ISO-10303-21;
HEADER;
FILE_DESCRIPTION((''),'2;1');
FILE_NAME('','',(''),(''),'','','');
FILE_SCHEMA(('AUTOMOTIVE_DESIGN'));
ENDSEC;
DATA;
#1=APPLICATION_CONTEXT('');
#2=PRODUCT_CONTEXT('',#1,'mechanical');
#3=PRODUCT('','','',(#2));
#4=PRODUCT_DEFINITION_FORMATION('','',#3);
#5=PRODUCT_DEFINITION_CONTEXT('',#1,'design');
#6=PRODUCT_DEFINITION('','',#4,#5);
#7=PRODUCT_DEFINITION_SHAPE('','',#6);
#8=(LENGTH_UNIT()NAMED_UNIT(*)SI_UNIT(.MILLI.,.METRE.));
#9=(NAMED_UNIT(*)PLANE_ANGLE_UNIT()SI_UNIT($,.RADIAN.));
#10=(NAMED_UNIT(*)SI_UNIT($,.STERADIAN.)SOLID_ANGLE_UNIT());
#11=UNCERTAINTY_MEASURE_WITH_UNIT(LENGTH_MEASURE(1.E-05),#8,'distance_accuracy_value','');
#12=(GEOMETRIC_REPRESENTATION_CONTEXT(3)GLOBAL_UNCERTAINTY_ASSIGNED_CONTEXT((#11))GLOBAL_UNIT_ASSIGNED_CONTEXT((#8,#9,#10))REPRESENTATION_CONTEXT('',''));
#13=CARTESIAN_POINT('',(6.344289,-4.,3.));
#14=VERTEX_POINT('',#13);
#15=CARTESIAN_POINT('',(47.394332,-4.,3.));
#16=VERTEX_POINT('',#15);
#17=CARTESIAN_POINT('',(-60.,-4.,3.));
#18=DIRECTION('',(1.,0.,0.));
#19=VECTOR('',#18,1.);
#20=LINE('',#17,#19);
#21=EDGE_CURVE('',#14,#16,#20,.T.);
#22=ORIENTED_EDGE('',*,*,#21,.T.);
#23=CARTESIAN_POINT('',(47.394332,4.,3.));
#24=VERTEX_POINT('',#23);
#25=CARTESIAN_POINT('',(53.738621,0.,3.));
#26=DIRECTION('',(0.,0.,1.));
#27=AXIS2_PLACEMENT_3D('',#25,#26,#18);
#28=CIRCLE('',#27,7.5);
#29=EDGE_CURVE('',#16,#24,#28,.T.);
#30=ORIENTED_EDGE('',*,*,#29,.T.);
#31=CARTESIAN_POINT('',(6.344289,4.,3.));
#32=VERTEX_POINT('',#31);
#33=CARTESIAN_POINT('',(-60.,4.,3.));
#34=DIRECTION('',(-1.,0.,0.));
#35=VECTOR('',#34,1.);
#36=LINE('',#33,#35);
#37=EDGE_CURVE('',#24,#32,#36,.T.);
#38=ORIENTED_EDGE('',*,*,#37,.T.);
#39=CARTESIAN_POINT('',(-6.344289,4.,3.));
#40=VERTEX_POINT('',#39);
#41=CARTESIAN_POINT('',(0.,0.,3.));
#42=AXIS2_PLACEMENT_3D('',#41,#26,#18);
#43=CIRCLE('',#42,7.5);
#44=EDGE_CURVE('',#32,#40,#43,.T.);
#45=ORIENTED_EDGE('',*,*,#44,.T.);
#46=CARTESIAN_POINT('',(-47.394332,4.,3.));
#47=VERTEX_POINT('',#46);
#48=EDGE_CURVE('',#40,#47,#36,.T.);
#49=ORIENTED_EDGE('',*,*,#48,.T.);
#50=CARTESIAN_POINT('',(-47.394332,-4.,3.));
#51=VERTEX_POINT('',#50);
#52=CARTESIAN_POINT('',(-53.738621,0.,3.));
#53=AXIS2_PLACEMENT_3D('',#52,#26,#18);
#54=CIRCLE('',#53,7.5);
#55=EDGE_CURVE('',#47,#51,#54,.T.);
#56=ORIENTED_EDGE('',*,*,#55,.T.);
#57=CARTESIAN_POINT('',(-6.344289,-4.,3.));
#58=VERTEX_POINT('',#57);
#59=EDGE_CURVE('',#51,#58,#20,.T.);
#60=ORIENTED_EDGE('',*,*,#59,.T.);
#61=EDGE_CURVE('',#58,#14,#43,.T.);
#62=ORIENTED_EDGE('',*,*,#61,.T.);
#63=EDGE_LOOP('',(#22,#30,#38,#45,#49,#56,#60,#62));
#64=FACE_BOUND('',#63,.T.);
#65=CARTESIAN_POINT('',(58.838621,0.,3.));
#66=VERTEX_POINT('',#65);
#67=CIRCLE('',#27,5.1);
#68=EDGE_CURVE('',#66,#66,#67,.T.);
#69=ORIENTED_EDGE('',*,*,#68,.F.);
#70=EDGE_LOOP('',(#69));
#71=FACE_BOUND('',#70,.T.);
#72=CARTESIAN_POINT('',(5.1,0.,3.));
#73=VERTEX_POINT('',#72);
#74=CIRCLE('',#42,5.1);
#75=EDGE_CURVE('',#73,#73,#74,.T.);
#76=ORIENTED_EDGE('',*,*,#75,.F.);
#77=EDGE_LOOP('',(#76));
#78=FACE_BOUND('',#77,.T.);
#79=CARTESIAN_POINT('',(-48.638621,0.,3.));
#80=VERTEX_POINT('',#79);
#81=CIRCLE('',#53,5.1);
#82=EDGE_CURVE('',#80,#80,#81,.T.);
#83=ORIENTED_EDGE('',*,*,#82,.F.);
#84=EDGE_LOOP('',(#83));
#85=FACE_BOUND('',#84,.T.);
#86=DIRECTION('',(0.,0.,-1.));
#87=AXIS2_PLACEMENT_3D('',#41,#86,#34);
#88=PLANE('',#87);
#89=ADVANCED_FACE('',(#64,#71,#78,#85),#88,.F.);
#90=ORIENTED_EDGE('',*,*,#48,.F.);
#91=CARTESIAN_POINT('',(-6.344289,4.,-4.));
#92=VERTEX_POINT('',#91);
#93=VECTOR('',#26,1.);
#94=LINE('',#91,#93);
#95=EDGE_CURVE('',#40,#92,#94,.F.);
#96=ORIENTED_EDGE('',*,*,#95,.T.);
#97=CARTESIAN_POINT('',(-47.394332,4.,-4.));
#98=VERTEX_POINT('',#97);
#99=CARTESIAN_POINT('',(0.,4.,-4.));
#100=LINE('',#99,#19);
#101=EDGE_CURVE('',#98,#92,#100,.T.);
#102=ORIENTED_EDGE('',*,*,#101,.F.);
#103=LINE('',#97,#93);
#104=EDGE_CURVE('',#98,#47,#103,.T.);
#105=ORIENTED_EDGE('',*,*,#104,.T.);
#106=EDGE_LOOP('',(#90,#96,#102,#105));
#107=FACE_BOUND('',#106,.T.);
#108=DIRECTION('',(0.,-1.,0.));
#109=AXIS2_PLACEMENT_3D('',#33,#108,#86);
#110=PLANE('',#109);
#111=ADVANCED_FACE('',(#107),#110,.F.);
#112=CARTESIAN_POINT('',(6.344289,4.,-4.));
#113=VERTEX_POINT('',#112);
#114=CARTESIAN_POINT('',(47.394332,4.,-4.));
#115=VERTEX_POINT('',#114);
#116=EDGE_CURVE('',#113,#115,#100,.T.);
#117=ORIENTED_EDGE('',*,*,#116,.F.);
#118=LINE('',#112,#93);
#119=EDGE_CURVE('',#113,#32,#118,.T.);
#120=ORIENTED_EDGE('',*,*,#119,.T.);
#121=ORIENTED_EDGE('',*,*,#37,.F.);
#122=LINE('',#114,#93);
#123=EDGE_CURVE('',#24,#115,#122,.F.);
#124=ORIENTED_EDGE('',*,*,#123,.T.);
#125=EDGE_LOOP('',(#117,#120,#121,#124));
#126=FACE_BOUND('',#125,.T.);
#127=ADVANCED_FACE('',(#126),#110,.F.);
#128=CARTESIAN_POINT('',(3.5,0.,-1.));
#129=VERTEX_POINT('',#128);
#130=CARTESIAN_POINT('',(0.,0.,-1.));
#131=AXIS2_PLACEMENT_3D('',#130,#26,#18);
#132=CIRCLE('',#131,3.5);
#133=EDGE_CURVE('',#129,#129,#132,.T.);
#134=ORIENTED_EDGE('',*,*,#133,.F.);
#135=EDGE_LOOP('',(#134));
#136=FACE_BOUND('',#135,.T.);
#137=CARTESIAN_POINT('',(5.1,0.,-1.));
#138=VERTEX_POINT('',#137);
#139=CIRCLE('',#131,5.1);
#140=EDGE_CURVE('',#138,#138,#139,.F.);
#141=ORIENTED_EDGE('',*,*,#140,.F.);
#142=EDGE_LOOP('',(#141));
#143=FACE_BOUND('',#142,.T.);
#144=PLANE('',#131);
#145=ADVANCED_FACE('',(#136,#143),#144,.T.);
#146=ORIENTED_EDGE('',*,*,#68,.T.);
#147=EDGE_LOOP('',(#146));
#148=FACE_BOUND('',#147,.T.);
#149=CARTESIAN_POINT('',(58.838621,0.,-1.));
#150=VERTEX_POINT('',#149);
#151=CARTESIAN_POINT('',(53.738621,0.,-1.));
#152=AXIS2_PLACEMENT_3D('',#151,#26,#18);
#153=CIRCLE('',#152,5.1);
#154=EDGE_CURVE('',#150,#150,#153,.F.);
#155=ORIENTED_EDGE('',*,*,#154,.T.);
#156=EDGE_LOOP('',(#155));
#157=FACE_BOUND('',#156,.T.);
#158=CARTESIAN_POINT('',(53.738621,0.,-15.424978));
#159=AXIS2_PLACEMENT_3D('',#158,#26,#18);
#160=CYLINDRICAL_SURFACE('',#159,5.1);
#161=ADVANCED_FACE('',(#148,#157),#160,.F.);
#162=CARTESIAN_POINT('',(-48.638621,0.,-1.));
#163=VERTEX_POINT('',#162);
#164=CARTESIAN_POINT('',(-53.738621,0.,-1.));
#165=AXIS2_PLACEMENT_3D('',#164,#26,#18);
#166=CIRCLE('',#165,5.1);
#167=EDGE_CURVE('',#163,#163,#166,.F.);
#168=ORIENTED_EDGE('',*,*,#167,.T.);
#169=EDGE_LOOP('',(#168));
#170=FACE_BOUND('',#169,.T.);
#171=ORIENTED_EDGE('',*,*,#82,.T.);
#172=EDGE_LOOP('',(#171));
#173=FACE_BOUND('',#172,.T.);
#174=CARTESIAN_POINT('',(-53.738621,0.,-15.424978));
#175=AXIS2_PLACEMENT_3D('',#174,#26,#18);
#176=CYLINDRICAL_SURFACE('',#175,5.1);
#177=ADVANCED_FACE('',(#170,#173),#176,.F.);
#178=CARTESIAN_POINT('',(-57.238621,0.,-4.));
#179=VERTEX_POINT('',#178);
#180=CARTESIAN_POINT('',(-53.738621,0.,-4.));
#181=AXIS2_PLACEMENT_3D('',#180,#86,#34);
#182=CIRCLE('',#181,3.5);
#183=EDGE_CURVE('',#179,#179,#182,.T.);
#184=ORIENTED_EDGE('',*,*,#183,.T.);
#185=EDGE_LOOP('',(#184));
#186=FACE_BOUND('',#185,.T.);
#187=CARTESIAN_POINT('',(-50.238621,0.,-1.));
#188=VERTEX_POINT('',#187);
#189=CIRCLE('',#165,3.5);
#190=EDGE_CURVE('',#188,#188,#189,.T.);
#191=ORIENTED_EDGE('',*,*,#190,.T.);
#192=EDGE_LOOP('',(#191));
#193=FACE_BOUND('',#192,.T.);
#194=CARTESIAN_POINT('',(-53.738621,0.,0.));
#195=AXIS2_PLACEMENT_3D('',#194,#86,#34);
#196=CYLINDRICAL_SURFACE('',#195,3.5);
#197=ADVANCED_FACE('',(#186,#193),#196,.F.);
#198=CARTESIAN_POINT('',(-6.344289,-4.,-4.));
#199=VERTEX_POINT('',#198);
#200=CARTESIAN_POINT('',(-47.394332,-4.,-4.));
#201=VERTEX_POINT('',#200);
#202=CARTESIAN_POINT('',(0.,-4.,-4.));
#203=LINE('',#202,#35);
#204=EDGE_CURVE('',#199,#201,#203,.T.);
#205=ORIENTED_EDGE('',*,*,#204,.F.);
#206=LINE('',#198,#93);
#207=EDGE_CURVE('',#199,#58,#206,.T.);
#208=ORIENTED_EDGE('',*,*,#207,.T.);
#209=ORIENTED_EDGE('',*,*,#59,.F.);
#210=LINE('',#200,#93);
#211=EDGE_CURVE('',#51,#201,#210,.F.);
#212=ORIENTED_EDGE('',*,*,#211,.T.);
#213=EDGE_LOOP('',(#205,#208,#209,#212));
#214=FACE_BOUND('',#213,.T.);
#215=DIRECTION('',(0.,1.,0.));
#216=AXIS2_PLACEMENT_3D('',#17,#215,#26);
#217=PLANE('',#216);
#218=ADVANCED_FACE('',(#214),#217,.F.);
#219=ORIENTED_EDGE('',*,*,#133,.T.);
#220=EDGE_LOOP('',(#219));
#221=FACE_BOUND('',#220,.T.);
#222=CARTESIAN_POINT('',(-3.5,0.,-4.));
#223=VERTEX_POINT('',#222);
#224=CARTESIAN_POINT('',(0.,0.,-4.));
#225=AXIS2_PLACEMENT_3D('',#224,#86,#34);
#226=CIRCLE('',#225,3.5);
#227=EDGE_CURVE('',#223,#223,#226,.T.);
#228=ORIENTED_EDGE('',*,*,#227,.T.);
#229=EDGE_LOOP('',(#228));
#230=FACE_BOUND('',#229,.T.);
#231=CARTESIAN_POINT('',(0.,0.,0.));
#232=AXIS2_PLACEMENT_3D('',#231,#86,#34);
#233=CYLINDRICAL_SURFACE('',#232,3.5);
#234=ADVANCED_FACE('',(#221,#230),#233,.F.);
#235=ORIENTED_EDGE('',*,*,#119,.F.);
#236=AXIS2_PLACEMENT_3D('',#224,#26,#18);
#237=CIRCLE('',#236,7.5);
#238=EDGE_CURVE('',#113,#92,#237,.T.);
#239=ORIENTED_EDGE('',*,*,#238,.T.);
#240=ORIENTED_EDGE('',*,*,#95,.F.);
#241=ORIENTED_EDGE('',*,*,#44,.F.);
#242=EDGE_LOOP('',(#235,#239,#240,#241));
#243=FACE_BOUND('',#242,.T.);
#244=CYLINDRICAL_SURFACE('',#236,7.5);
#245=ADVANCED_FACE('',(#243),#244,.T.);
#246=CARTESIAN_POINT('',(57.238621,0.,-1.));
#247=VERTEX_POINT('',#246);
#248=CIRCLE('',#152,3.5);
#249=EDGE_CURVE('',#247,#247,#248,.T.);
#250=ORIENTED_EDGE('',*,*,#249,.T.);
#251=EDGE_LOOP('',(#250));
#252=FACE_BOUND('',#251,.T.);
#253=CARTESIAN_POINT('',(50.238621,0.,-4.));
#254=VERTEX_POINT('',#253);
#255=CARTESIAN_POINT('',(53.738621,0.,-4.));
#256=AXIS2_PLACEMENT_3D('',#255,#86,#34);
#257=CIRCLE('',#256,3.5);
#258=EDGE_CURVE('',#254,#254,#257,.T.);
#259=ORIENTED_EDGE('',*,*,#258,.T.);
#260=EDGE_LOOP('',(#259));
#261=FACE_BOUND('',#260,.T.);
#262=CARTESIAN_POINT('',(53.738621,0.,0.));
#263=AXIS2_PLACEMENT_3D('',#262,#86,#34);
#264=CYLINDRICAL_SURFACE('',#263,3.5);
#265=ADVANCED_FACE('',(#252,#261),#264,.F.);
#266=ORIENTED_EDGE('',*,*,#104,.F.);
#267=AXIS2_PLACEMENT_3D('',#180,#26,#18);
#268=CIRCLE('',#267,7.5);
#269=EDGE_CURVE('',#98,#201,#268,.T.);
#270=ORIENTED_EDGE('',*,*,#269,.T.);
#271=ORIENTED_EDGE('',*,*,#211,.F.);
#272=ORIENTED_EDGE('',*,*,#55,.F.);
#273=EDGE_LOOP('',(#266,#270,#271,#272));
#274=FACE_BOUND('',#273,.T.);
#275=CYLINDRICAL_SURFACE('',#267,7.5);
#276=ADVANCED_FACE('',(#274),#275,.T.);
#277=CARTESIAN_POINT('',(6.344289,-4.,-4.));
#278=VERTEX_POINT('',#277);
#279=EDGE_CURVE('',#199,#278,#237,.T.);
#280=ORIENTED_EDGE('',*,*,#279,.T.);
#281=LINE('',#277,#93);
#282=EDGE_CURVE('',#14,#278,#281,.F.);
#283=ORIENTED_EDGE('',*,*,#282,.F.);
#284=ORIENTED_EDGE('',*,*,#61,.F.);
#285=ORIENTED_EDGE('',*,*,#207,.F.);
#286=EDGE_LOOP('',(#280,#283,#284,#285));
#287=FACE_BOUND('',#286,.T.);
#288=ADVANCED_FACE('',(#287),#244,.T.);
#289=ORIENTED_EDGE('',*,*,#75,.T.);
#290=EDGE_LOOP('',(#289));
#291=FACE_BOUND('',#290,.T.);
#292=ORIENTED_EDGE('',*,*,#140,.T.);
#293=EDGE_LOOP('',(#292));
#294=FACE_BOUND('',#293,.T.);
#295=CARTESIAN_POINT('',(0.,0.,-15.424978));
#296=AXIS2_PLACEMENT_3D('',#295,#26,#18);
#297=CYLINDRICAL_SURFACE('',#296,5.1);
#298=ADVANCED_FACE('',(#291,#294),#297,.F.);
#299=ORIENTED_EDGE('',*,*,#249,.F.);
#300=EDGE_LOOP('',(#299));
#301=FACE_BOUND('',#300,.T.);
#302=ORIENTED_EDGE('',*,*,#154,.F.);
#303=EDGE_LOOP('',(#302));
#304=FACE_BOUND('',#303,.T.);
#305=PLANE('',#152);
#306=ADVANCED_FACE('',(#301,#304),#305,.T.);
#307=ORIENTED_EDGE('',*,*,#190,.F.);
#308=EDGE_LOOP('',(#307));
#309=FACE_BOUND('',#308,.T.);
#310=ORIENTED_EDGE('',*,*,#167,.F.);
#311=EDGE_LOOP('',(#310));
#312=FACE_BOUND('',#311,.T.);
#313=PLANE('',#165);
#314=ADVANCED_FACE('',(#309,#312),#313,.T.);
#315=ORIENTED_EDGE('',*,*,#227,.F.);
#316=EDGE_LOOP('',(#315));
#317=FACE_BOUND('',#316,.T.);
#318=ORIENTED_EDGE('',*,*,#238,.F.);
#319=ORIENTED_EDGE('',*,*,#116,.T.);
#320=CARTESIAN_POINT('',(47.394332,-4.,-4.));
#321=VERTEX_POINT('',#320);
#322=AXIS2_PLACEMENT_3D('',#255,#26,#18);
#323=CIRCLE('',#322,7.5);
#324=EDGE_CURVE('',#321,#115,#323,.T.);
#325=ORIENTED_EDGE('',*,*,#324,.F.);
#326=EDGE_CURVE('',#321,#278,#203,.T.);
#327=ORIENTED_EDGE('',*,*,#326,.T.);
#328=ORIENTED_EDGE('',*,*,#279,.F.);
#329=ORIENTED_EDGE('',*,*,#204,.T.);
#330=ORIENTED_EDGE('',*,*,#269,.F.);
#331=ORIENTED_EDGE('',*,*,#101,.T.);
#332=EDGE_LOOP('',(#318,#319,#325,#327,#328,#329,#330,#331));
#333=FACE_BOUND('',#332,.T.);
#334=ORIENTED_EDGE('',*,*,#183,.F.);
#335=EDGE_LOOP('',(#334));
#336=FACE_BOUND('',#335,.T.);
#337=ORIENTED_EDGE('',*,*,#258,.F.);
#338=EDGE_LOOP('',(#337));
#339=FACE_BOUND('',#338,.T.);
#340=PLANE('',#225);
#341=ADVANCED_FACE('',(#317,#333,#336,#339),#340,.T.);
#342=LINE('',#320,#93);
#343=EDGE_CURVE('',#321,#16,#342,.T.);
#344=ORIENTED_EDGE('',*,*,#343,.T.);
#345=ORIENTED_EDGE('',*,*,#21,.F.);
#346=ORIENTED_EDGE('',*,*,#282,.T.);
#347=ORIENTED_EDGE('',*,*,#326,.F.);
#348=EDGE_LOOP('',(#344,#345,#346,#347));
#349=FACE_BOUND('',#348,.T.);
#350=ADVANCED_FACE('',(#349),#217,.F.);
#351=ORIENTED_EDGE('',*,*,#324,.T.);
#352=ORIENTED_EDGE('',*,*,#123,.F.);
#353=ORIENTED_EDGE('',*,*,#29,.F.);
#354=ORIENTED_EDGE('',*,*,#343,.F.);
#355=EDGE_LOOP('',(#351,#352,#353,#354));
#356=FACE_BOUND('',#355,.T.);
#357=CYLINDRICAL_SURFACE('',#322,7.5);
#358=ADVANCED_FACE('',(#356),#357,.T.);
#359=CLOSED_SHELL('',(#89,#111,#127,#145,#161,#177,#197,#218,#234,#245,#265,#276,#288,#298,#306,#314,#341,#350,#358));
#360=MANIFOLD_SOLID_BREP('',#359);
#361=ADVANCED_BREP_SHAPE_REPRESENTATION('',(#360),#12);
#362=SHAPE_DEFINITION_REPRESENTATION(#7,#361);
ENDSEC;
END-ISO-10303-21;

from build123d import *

# Parameters (mm, degrees)
SKETCH1_W           = 120
SKETCH1_H           = 8
SKETCH1_R           = 1.5
BOSS_EXTRUDE1_DEPTH = 3
FILLET2_R           = 4
FILLET3_R           = 4
FILLET4_R           = 4
SKETCH2_R           = 1.5
CUT_EXTRUDE1_DEPTH  = 3
CUT_EXTRUDE2_DEPTH  = 3
SKETCH4_R           = 1.5
BOSS_EXTRUDE2_DEPTH = 4
SKETCH5_R           = 7.5
SKETCH5_R_2         = 1.5
BOSS_EXTRUDE3_DEPTH = 7
SKETCH6_R           = 5
CUT_EXTRUDE3_DEPTH  = 4
SKETCH7_R           = 3.5
CUT_EXTRUDE4_DEPTH  = 4
SKETCH8_R           = 5.1
SKETCH8_R_2         = 5
CUT_EXTRUDE5_DEPTH  = 4


with BuildPart() as part:
    # Sketch1 → Boss-Extrude1 (new body)
    with BuildSketch(Plane.XY):
        Rectangle(SKETCH1_W, SKETCH1_H)
        Circle(SKETCH1_R, mode=Mode.SUBTRACT)
    extrude(amount=BOSS_EXTRUDE1_DEPTH)

    # Fillet2
    fillet2_edges = [part.edges().sort_by_distance(p)[0] for p in [
        (-60, 4, 1.5),
    ]]
    fillet(fillet2_edges, radius=FILLET2_R)

    # Fillet3
    fillet3_edges = [part.edges().sort_by_distance(p)[0] for p in [
        (-60, -4, 1.5),
    ]]
    fillet(fillet3_edges, radius=FILLET3_R - 0.0001)  # a hair under: the kernel refuses the full size

    # Fillet4
    fillet4_edges = [part.edges().sort_by_distance(p)[0] for p in [
        (60, -4, 1.5),
        (60, 4, 1.5),
    ]]
    fillet(fillet4_edges, radius=FILLET4_R - 0.0001)  # a hair under: the kernel refuses the full size

    # Sketch2 → Cut-Extrude1 (cut)
    with BuildSketch(Plane.XY.offset(3)):
        with Locations((-53.738621028, 0)):
            Circle(SKETCH2_R)
        with Locations((53.738621028, 0)):
            Circle(SKETCH2_R)
    extrude(amount=-CUT_EXTRUDE1_DEPTH, mode=Mode.SUBTRACT)

    # Sketch3 → Cut-Extrude2 (cut)
    with BuildSketch(Plane.XY.offset(3)):
        with BuildLine():
            ThreePointArc((-53.738621028, -4), (-57.738621028, 0), (-53.738621028, 4))
            Line((-53.738621028, 4), (-56, 4))
            ThreePointArc((-56, 4), (-58.828427125, 2.828427125), (-60, 0))
            ThreePointArc((-60, 0), (-58.828427125, -2.828427125), (-56, -4))
            Line((-56, -4), (-53.738621028, -4))
        make_face()
        with BuildLine():
            ThreePointArc((60, 0), (58.828427125, 2.828427125), (56, 4))
            Line((56, 4), (53.738621028, 4))
            ThreePointArc((53.738621028, 4), (57.738621028, 0), (53.738621028, -4))
            Line((53.738621028, -4), (56, -4))
            ThreePointArc((56, -4), (58.828427125, -2.828427125), (60, 0))
        make_face()
    extrude(amount=-CUT_EXTRUDE2_DEPTH, mode=Mode.SUBTRACT)


with BuildPart() as cut_extrude2_kept_piece:
    # of the separate pieces the step leaves, the one the design keeps (cut_extrude2_pieces_kept)
    add(part.part.solids().sort_by_distance((-53.738621028, -4, 0))[0])

    # Sketch4 → Boss-Extrude2 (add)
    with BuildSketch(Plane(origin=(0, 0, 0), x_dir=(-1, 0, 0), z_dir=(0, 0, -1))):
        with BuildLine():
            Line((53.738621028, 4), (-53.738621028, 4))
            ThreePointArc((-53.738621028, 4), (-57.738621028, 0), (-53.738621028, -4))
            Line((-53.738621028, -4), (53.738621028, -4))
            ThreePointArc((53.738621028, -4), (57.738621028, 0), (53.738621028, 4))
        make_face()
        with Locations(Location((-53.738621028, 0, 0), (0, 0, 180))):
            Circle(SKETCH4_R, mode=Mode.SUBTRACT)
        Circle(SKETCH4_R, mode=Mode.SUBTRACT)
        with Locations(Location((53.738621028, 0, 0), (0, 0, 180))):
            Circle(SKETCH4_R, mode=Mode.SUBTRACT)
    extrude(amount=BOSS_EXTRUDE2_DEPTH)

    # Sketch5 → Boss-Extrude3 (add, through all)
    # profile 1 of 3: a face of its own
    with BuildSketch(Plane.XY.offset(3)):
        with Locations((-53.738621028, 0)):
            Circle(SKETCH5_R)
        with Locations((-53.738621028, 0)):
            Circle(SKETCH5_R_2, mode=Mode.SUBTRACT)
    # profile 2 of 3: a face of its own
    with BuildSketch(Plane.XY.offset(3)):
        Circle(SKETCH5_R)
        with Locations(Location((0, 0, 0), (0, 0, 180))):
            Circle(SKETCH5_R_2, mode=Mode.SUBTRACT)
    # profile 3 of 3: a face of its own
    with BuildSketch(Plane.XY.offset(3)):
        with Locations((53.738621028, 0)):
            Circle(SKETCH5_R)
        with Locations((53.738621028, 0)):
            Circle(SKETCH5_R_2, mode=Mode.SUBTRACT)
    extrude(amount=-BOSS_EXTRUDE3_DEPTH)

    # Sketch6 → Cut-Extrude3 (cut)
    with BuildSketch(Plane.XY.offset(3)):
        with Locations((-53.738621028, 0)):
            Circle(SKETCH6_R)
        Circle(SKETCH6_R)
        with Locations((53.738621028, 0)):
            Circle(SKETCH6_R)
    extrude(amount=-CUT_EXTRUDE3_DEPTH, mode=Mode.SUBTRACT)

    # Sketch7 → Cut-Extrude4 (cut)
    with BuildSketch(Plane(origin=(0, 0, -4), x_dir=(-1, 0, 0), z_dir=(0, 0, -1))):
        with Locations((-53.738621028, 0)):
            Circle(SKETCH7_R)
        Circle(SKETCH7_R)
        with Locations((53.738621028, 0)):
            Circle(SKETCH7_R)
    extrude(amount=-CUT_EXTRUDE4_DEPTH, mode=Mode.SUBTRACT)

    # Sketch8 → Cut-Extrude5 (cut)
    # profile 1 of 3: a face of its own
    with BuildSketch(Plane.XY.offset(3)):
        with Locations((-53.738621028, 0)):
            Circle(SKETCH8_R)
        with Locations((-53.738621028, 0)):
            Circle(SKETCH8_R_2, mode=Mode.SUBTRACT)
    # profile 2 of 3: a face of its own
    with BuildSketch(Plane.XY.offset(3)):
        Circle(SKETCH8_R)
        Circle(SKETCH8_R_2, mode=Mode.SUBTRACT)
    # profile 3 of 3: a face of its own
    with BuildSketch(Plane.XY.offset(3)):
        with Locations((53.738621028, 0)):
            Circle(SKETCH8_R)
        with Locations((53.738621028, 0)):
            Circle(SKETCH8_R_2, mode=Mode.SUBTRACT)
    extrude(amount=-CUT_EXTRUDE5_DEPTH, mode=Mode.SUBTRACT)


solid = cut_extrude2_kept_piece.part
